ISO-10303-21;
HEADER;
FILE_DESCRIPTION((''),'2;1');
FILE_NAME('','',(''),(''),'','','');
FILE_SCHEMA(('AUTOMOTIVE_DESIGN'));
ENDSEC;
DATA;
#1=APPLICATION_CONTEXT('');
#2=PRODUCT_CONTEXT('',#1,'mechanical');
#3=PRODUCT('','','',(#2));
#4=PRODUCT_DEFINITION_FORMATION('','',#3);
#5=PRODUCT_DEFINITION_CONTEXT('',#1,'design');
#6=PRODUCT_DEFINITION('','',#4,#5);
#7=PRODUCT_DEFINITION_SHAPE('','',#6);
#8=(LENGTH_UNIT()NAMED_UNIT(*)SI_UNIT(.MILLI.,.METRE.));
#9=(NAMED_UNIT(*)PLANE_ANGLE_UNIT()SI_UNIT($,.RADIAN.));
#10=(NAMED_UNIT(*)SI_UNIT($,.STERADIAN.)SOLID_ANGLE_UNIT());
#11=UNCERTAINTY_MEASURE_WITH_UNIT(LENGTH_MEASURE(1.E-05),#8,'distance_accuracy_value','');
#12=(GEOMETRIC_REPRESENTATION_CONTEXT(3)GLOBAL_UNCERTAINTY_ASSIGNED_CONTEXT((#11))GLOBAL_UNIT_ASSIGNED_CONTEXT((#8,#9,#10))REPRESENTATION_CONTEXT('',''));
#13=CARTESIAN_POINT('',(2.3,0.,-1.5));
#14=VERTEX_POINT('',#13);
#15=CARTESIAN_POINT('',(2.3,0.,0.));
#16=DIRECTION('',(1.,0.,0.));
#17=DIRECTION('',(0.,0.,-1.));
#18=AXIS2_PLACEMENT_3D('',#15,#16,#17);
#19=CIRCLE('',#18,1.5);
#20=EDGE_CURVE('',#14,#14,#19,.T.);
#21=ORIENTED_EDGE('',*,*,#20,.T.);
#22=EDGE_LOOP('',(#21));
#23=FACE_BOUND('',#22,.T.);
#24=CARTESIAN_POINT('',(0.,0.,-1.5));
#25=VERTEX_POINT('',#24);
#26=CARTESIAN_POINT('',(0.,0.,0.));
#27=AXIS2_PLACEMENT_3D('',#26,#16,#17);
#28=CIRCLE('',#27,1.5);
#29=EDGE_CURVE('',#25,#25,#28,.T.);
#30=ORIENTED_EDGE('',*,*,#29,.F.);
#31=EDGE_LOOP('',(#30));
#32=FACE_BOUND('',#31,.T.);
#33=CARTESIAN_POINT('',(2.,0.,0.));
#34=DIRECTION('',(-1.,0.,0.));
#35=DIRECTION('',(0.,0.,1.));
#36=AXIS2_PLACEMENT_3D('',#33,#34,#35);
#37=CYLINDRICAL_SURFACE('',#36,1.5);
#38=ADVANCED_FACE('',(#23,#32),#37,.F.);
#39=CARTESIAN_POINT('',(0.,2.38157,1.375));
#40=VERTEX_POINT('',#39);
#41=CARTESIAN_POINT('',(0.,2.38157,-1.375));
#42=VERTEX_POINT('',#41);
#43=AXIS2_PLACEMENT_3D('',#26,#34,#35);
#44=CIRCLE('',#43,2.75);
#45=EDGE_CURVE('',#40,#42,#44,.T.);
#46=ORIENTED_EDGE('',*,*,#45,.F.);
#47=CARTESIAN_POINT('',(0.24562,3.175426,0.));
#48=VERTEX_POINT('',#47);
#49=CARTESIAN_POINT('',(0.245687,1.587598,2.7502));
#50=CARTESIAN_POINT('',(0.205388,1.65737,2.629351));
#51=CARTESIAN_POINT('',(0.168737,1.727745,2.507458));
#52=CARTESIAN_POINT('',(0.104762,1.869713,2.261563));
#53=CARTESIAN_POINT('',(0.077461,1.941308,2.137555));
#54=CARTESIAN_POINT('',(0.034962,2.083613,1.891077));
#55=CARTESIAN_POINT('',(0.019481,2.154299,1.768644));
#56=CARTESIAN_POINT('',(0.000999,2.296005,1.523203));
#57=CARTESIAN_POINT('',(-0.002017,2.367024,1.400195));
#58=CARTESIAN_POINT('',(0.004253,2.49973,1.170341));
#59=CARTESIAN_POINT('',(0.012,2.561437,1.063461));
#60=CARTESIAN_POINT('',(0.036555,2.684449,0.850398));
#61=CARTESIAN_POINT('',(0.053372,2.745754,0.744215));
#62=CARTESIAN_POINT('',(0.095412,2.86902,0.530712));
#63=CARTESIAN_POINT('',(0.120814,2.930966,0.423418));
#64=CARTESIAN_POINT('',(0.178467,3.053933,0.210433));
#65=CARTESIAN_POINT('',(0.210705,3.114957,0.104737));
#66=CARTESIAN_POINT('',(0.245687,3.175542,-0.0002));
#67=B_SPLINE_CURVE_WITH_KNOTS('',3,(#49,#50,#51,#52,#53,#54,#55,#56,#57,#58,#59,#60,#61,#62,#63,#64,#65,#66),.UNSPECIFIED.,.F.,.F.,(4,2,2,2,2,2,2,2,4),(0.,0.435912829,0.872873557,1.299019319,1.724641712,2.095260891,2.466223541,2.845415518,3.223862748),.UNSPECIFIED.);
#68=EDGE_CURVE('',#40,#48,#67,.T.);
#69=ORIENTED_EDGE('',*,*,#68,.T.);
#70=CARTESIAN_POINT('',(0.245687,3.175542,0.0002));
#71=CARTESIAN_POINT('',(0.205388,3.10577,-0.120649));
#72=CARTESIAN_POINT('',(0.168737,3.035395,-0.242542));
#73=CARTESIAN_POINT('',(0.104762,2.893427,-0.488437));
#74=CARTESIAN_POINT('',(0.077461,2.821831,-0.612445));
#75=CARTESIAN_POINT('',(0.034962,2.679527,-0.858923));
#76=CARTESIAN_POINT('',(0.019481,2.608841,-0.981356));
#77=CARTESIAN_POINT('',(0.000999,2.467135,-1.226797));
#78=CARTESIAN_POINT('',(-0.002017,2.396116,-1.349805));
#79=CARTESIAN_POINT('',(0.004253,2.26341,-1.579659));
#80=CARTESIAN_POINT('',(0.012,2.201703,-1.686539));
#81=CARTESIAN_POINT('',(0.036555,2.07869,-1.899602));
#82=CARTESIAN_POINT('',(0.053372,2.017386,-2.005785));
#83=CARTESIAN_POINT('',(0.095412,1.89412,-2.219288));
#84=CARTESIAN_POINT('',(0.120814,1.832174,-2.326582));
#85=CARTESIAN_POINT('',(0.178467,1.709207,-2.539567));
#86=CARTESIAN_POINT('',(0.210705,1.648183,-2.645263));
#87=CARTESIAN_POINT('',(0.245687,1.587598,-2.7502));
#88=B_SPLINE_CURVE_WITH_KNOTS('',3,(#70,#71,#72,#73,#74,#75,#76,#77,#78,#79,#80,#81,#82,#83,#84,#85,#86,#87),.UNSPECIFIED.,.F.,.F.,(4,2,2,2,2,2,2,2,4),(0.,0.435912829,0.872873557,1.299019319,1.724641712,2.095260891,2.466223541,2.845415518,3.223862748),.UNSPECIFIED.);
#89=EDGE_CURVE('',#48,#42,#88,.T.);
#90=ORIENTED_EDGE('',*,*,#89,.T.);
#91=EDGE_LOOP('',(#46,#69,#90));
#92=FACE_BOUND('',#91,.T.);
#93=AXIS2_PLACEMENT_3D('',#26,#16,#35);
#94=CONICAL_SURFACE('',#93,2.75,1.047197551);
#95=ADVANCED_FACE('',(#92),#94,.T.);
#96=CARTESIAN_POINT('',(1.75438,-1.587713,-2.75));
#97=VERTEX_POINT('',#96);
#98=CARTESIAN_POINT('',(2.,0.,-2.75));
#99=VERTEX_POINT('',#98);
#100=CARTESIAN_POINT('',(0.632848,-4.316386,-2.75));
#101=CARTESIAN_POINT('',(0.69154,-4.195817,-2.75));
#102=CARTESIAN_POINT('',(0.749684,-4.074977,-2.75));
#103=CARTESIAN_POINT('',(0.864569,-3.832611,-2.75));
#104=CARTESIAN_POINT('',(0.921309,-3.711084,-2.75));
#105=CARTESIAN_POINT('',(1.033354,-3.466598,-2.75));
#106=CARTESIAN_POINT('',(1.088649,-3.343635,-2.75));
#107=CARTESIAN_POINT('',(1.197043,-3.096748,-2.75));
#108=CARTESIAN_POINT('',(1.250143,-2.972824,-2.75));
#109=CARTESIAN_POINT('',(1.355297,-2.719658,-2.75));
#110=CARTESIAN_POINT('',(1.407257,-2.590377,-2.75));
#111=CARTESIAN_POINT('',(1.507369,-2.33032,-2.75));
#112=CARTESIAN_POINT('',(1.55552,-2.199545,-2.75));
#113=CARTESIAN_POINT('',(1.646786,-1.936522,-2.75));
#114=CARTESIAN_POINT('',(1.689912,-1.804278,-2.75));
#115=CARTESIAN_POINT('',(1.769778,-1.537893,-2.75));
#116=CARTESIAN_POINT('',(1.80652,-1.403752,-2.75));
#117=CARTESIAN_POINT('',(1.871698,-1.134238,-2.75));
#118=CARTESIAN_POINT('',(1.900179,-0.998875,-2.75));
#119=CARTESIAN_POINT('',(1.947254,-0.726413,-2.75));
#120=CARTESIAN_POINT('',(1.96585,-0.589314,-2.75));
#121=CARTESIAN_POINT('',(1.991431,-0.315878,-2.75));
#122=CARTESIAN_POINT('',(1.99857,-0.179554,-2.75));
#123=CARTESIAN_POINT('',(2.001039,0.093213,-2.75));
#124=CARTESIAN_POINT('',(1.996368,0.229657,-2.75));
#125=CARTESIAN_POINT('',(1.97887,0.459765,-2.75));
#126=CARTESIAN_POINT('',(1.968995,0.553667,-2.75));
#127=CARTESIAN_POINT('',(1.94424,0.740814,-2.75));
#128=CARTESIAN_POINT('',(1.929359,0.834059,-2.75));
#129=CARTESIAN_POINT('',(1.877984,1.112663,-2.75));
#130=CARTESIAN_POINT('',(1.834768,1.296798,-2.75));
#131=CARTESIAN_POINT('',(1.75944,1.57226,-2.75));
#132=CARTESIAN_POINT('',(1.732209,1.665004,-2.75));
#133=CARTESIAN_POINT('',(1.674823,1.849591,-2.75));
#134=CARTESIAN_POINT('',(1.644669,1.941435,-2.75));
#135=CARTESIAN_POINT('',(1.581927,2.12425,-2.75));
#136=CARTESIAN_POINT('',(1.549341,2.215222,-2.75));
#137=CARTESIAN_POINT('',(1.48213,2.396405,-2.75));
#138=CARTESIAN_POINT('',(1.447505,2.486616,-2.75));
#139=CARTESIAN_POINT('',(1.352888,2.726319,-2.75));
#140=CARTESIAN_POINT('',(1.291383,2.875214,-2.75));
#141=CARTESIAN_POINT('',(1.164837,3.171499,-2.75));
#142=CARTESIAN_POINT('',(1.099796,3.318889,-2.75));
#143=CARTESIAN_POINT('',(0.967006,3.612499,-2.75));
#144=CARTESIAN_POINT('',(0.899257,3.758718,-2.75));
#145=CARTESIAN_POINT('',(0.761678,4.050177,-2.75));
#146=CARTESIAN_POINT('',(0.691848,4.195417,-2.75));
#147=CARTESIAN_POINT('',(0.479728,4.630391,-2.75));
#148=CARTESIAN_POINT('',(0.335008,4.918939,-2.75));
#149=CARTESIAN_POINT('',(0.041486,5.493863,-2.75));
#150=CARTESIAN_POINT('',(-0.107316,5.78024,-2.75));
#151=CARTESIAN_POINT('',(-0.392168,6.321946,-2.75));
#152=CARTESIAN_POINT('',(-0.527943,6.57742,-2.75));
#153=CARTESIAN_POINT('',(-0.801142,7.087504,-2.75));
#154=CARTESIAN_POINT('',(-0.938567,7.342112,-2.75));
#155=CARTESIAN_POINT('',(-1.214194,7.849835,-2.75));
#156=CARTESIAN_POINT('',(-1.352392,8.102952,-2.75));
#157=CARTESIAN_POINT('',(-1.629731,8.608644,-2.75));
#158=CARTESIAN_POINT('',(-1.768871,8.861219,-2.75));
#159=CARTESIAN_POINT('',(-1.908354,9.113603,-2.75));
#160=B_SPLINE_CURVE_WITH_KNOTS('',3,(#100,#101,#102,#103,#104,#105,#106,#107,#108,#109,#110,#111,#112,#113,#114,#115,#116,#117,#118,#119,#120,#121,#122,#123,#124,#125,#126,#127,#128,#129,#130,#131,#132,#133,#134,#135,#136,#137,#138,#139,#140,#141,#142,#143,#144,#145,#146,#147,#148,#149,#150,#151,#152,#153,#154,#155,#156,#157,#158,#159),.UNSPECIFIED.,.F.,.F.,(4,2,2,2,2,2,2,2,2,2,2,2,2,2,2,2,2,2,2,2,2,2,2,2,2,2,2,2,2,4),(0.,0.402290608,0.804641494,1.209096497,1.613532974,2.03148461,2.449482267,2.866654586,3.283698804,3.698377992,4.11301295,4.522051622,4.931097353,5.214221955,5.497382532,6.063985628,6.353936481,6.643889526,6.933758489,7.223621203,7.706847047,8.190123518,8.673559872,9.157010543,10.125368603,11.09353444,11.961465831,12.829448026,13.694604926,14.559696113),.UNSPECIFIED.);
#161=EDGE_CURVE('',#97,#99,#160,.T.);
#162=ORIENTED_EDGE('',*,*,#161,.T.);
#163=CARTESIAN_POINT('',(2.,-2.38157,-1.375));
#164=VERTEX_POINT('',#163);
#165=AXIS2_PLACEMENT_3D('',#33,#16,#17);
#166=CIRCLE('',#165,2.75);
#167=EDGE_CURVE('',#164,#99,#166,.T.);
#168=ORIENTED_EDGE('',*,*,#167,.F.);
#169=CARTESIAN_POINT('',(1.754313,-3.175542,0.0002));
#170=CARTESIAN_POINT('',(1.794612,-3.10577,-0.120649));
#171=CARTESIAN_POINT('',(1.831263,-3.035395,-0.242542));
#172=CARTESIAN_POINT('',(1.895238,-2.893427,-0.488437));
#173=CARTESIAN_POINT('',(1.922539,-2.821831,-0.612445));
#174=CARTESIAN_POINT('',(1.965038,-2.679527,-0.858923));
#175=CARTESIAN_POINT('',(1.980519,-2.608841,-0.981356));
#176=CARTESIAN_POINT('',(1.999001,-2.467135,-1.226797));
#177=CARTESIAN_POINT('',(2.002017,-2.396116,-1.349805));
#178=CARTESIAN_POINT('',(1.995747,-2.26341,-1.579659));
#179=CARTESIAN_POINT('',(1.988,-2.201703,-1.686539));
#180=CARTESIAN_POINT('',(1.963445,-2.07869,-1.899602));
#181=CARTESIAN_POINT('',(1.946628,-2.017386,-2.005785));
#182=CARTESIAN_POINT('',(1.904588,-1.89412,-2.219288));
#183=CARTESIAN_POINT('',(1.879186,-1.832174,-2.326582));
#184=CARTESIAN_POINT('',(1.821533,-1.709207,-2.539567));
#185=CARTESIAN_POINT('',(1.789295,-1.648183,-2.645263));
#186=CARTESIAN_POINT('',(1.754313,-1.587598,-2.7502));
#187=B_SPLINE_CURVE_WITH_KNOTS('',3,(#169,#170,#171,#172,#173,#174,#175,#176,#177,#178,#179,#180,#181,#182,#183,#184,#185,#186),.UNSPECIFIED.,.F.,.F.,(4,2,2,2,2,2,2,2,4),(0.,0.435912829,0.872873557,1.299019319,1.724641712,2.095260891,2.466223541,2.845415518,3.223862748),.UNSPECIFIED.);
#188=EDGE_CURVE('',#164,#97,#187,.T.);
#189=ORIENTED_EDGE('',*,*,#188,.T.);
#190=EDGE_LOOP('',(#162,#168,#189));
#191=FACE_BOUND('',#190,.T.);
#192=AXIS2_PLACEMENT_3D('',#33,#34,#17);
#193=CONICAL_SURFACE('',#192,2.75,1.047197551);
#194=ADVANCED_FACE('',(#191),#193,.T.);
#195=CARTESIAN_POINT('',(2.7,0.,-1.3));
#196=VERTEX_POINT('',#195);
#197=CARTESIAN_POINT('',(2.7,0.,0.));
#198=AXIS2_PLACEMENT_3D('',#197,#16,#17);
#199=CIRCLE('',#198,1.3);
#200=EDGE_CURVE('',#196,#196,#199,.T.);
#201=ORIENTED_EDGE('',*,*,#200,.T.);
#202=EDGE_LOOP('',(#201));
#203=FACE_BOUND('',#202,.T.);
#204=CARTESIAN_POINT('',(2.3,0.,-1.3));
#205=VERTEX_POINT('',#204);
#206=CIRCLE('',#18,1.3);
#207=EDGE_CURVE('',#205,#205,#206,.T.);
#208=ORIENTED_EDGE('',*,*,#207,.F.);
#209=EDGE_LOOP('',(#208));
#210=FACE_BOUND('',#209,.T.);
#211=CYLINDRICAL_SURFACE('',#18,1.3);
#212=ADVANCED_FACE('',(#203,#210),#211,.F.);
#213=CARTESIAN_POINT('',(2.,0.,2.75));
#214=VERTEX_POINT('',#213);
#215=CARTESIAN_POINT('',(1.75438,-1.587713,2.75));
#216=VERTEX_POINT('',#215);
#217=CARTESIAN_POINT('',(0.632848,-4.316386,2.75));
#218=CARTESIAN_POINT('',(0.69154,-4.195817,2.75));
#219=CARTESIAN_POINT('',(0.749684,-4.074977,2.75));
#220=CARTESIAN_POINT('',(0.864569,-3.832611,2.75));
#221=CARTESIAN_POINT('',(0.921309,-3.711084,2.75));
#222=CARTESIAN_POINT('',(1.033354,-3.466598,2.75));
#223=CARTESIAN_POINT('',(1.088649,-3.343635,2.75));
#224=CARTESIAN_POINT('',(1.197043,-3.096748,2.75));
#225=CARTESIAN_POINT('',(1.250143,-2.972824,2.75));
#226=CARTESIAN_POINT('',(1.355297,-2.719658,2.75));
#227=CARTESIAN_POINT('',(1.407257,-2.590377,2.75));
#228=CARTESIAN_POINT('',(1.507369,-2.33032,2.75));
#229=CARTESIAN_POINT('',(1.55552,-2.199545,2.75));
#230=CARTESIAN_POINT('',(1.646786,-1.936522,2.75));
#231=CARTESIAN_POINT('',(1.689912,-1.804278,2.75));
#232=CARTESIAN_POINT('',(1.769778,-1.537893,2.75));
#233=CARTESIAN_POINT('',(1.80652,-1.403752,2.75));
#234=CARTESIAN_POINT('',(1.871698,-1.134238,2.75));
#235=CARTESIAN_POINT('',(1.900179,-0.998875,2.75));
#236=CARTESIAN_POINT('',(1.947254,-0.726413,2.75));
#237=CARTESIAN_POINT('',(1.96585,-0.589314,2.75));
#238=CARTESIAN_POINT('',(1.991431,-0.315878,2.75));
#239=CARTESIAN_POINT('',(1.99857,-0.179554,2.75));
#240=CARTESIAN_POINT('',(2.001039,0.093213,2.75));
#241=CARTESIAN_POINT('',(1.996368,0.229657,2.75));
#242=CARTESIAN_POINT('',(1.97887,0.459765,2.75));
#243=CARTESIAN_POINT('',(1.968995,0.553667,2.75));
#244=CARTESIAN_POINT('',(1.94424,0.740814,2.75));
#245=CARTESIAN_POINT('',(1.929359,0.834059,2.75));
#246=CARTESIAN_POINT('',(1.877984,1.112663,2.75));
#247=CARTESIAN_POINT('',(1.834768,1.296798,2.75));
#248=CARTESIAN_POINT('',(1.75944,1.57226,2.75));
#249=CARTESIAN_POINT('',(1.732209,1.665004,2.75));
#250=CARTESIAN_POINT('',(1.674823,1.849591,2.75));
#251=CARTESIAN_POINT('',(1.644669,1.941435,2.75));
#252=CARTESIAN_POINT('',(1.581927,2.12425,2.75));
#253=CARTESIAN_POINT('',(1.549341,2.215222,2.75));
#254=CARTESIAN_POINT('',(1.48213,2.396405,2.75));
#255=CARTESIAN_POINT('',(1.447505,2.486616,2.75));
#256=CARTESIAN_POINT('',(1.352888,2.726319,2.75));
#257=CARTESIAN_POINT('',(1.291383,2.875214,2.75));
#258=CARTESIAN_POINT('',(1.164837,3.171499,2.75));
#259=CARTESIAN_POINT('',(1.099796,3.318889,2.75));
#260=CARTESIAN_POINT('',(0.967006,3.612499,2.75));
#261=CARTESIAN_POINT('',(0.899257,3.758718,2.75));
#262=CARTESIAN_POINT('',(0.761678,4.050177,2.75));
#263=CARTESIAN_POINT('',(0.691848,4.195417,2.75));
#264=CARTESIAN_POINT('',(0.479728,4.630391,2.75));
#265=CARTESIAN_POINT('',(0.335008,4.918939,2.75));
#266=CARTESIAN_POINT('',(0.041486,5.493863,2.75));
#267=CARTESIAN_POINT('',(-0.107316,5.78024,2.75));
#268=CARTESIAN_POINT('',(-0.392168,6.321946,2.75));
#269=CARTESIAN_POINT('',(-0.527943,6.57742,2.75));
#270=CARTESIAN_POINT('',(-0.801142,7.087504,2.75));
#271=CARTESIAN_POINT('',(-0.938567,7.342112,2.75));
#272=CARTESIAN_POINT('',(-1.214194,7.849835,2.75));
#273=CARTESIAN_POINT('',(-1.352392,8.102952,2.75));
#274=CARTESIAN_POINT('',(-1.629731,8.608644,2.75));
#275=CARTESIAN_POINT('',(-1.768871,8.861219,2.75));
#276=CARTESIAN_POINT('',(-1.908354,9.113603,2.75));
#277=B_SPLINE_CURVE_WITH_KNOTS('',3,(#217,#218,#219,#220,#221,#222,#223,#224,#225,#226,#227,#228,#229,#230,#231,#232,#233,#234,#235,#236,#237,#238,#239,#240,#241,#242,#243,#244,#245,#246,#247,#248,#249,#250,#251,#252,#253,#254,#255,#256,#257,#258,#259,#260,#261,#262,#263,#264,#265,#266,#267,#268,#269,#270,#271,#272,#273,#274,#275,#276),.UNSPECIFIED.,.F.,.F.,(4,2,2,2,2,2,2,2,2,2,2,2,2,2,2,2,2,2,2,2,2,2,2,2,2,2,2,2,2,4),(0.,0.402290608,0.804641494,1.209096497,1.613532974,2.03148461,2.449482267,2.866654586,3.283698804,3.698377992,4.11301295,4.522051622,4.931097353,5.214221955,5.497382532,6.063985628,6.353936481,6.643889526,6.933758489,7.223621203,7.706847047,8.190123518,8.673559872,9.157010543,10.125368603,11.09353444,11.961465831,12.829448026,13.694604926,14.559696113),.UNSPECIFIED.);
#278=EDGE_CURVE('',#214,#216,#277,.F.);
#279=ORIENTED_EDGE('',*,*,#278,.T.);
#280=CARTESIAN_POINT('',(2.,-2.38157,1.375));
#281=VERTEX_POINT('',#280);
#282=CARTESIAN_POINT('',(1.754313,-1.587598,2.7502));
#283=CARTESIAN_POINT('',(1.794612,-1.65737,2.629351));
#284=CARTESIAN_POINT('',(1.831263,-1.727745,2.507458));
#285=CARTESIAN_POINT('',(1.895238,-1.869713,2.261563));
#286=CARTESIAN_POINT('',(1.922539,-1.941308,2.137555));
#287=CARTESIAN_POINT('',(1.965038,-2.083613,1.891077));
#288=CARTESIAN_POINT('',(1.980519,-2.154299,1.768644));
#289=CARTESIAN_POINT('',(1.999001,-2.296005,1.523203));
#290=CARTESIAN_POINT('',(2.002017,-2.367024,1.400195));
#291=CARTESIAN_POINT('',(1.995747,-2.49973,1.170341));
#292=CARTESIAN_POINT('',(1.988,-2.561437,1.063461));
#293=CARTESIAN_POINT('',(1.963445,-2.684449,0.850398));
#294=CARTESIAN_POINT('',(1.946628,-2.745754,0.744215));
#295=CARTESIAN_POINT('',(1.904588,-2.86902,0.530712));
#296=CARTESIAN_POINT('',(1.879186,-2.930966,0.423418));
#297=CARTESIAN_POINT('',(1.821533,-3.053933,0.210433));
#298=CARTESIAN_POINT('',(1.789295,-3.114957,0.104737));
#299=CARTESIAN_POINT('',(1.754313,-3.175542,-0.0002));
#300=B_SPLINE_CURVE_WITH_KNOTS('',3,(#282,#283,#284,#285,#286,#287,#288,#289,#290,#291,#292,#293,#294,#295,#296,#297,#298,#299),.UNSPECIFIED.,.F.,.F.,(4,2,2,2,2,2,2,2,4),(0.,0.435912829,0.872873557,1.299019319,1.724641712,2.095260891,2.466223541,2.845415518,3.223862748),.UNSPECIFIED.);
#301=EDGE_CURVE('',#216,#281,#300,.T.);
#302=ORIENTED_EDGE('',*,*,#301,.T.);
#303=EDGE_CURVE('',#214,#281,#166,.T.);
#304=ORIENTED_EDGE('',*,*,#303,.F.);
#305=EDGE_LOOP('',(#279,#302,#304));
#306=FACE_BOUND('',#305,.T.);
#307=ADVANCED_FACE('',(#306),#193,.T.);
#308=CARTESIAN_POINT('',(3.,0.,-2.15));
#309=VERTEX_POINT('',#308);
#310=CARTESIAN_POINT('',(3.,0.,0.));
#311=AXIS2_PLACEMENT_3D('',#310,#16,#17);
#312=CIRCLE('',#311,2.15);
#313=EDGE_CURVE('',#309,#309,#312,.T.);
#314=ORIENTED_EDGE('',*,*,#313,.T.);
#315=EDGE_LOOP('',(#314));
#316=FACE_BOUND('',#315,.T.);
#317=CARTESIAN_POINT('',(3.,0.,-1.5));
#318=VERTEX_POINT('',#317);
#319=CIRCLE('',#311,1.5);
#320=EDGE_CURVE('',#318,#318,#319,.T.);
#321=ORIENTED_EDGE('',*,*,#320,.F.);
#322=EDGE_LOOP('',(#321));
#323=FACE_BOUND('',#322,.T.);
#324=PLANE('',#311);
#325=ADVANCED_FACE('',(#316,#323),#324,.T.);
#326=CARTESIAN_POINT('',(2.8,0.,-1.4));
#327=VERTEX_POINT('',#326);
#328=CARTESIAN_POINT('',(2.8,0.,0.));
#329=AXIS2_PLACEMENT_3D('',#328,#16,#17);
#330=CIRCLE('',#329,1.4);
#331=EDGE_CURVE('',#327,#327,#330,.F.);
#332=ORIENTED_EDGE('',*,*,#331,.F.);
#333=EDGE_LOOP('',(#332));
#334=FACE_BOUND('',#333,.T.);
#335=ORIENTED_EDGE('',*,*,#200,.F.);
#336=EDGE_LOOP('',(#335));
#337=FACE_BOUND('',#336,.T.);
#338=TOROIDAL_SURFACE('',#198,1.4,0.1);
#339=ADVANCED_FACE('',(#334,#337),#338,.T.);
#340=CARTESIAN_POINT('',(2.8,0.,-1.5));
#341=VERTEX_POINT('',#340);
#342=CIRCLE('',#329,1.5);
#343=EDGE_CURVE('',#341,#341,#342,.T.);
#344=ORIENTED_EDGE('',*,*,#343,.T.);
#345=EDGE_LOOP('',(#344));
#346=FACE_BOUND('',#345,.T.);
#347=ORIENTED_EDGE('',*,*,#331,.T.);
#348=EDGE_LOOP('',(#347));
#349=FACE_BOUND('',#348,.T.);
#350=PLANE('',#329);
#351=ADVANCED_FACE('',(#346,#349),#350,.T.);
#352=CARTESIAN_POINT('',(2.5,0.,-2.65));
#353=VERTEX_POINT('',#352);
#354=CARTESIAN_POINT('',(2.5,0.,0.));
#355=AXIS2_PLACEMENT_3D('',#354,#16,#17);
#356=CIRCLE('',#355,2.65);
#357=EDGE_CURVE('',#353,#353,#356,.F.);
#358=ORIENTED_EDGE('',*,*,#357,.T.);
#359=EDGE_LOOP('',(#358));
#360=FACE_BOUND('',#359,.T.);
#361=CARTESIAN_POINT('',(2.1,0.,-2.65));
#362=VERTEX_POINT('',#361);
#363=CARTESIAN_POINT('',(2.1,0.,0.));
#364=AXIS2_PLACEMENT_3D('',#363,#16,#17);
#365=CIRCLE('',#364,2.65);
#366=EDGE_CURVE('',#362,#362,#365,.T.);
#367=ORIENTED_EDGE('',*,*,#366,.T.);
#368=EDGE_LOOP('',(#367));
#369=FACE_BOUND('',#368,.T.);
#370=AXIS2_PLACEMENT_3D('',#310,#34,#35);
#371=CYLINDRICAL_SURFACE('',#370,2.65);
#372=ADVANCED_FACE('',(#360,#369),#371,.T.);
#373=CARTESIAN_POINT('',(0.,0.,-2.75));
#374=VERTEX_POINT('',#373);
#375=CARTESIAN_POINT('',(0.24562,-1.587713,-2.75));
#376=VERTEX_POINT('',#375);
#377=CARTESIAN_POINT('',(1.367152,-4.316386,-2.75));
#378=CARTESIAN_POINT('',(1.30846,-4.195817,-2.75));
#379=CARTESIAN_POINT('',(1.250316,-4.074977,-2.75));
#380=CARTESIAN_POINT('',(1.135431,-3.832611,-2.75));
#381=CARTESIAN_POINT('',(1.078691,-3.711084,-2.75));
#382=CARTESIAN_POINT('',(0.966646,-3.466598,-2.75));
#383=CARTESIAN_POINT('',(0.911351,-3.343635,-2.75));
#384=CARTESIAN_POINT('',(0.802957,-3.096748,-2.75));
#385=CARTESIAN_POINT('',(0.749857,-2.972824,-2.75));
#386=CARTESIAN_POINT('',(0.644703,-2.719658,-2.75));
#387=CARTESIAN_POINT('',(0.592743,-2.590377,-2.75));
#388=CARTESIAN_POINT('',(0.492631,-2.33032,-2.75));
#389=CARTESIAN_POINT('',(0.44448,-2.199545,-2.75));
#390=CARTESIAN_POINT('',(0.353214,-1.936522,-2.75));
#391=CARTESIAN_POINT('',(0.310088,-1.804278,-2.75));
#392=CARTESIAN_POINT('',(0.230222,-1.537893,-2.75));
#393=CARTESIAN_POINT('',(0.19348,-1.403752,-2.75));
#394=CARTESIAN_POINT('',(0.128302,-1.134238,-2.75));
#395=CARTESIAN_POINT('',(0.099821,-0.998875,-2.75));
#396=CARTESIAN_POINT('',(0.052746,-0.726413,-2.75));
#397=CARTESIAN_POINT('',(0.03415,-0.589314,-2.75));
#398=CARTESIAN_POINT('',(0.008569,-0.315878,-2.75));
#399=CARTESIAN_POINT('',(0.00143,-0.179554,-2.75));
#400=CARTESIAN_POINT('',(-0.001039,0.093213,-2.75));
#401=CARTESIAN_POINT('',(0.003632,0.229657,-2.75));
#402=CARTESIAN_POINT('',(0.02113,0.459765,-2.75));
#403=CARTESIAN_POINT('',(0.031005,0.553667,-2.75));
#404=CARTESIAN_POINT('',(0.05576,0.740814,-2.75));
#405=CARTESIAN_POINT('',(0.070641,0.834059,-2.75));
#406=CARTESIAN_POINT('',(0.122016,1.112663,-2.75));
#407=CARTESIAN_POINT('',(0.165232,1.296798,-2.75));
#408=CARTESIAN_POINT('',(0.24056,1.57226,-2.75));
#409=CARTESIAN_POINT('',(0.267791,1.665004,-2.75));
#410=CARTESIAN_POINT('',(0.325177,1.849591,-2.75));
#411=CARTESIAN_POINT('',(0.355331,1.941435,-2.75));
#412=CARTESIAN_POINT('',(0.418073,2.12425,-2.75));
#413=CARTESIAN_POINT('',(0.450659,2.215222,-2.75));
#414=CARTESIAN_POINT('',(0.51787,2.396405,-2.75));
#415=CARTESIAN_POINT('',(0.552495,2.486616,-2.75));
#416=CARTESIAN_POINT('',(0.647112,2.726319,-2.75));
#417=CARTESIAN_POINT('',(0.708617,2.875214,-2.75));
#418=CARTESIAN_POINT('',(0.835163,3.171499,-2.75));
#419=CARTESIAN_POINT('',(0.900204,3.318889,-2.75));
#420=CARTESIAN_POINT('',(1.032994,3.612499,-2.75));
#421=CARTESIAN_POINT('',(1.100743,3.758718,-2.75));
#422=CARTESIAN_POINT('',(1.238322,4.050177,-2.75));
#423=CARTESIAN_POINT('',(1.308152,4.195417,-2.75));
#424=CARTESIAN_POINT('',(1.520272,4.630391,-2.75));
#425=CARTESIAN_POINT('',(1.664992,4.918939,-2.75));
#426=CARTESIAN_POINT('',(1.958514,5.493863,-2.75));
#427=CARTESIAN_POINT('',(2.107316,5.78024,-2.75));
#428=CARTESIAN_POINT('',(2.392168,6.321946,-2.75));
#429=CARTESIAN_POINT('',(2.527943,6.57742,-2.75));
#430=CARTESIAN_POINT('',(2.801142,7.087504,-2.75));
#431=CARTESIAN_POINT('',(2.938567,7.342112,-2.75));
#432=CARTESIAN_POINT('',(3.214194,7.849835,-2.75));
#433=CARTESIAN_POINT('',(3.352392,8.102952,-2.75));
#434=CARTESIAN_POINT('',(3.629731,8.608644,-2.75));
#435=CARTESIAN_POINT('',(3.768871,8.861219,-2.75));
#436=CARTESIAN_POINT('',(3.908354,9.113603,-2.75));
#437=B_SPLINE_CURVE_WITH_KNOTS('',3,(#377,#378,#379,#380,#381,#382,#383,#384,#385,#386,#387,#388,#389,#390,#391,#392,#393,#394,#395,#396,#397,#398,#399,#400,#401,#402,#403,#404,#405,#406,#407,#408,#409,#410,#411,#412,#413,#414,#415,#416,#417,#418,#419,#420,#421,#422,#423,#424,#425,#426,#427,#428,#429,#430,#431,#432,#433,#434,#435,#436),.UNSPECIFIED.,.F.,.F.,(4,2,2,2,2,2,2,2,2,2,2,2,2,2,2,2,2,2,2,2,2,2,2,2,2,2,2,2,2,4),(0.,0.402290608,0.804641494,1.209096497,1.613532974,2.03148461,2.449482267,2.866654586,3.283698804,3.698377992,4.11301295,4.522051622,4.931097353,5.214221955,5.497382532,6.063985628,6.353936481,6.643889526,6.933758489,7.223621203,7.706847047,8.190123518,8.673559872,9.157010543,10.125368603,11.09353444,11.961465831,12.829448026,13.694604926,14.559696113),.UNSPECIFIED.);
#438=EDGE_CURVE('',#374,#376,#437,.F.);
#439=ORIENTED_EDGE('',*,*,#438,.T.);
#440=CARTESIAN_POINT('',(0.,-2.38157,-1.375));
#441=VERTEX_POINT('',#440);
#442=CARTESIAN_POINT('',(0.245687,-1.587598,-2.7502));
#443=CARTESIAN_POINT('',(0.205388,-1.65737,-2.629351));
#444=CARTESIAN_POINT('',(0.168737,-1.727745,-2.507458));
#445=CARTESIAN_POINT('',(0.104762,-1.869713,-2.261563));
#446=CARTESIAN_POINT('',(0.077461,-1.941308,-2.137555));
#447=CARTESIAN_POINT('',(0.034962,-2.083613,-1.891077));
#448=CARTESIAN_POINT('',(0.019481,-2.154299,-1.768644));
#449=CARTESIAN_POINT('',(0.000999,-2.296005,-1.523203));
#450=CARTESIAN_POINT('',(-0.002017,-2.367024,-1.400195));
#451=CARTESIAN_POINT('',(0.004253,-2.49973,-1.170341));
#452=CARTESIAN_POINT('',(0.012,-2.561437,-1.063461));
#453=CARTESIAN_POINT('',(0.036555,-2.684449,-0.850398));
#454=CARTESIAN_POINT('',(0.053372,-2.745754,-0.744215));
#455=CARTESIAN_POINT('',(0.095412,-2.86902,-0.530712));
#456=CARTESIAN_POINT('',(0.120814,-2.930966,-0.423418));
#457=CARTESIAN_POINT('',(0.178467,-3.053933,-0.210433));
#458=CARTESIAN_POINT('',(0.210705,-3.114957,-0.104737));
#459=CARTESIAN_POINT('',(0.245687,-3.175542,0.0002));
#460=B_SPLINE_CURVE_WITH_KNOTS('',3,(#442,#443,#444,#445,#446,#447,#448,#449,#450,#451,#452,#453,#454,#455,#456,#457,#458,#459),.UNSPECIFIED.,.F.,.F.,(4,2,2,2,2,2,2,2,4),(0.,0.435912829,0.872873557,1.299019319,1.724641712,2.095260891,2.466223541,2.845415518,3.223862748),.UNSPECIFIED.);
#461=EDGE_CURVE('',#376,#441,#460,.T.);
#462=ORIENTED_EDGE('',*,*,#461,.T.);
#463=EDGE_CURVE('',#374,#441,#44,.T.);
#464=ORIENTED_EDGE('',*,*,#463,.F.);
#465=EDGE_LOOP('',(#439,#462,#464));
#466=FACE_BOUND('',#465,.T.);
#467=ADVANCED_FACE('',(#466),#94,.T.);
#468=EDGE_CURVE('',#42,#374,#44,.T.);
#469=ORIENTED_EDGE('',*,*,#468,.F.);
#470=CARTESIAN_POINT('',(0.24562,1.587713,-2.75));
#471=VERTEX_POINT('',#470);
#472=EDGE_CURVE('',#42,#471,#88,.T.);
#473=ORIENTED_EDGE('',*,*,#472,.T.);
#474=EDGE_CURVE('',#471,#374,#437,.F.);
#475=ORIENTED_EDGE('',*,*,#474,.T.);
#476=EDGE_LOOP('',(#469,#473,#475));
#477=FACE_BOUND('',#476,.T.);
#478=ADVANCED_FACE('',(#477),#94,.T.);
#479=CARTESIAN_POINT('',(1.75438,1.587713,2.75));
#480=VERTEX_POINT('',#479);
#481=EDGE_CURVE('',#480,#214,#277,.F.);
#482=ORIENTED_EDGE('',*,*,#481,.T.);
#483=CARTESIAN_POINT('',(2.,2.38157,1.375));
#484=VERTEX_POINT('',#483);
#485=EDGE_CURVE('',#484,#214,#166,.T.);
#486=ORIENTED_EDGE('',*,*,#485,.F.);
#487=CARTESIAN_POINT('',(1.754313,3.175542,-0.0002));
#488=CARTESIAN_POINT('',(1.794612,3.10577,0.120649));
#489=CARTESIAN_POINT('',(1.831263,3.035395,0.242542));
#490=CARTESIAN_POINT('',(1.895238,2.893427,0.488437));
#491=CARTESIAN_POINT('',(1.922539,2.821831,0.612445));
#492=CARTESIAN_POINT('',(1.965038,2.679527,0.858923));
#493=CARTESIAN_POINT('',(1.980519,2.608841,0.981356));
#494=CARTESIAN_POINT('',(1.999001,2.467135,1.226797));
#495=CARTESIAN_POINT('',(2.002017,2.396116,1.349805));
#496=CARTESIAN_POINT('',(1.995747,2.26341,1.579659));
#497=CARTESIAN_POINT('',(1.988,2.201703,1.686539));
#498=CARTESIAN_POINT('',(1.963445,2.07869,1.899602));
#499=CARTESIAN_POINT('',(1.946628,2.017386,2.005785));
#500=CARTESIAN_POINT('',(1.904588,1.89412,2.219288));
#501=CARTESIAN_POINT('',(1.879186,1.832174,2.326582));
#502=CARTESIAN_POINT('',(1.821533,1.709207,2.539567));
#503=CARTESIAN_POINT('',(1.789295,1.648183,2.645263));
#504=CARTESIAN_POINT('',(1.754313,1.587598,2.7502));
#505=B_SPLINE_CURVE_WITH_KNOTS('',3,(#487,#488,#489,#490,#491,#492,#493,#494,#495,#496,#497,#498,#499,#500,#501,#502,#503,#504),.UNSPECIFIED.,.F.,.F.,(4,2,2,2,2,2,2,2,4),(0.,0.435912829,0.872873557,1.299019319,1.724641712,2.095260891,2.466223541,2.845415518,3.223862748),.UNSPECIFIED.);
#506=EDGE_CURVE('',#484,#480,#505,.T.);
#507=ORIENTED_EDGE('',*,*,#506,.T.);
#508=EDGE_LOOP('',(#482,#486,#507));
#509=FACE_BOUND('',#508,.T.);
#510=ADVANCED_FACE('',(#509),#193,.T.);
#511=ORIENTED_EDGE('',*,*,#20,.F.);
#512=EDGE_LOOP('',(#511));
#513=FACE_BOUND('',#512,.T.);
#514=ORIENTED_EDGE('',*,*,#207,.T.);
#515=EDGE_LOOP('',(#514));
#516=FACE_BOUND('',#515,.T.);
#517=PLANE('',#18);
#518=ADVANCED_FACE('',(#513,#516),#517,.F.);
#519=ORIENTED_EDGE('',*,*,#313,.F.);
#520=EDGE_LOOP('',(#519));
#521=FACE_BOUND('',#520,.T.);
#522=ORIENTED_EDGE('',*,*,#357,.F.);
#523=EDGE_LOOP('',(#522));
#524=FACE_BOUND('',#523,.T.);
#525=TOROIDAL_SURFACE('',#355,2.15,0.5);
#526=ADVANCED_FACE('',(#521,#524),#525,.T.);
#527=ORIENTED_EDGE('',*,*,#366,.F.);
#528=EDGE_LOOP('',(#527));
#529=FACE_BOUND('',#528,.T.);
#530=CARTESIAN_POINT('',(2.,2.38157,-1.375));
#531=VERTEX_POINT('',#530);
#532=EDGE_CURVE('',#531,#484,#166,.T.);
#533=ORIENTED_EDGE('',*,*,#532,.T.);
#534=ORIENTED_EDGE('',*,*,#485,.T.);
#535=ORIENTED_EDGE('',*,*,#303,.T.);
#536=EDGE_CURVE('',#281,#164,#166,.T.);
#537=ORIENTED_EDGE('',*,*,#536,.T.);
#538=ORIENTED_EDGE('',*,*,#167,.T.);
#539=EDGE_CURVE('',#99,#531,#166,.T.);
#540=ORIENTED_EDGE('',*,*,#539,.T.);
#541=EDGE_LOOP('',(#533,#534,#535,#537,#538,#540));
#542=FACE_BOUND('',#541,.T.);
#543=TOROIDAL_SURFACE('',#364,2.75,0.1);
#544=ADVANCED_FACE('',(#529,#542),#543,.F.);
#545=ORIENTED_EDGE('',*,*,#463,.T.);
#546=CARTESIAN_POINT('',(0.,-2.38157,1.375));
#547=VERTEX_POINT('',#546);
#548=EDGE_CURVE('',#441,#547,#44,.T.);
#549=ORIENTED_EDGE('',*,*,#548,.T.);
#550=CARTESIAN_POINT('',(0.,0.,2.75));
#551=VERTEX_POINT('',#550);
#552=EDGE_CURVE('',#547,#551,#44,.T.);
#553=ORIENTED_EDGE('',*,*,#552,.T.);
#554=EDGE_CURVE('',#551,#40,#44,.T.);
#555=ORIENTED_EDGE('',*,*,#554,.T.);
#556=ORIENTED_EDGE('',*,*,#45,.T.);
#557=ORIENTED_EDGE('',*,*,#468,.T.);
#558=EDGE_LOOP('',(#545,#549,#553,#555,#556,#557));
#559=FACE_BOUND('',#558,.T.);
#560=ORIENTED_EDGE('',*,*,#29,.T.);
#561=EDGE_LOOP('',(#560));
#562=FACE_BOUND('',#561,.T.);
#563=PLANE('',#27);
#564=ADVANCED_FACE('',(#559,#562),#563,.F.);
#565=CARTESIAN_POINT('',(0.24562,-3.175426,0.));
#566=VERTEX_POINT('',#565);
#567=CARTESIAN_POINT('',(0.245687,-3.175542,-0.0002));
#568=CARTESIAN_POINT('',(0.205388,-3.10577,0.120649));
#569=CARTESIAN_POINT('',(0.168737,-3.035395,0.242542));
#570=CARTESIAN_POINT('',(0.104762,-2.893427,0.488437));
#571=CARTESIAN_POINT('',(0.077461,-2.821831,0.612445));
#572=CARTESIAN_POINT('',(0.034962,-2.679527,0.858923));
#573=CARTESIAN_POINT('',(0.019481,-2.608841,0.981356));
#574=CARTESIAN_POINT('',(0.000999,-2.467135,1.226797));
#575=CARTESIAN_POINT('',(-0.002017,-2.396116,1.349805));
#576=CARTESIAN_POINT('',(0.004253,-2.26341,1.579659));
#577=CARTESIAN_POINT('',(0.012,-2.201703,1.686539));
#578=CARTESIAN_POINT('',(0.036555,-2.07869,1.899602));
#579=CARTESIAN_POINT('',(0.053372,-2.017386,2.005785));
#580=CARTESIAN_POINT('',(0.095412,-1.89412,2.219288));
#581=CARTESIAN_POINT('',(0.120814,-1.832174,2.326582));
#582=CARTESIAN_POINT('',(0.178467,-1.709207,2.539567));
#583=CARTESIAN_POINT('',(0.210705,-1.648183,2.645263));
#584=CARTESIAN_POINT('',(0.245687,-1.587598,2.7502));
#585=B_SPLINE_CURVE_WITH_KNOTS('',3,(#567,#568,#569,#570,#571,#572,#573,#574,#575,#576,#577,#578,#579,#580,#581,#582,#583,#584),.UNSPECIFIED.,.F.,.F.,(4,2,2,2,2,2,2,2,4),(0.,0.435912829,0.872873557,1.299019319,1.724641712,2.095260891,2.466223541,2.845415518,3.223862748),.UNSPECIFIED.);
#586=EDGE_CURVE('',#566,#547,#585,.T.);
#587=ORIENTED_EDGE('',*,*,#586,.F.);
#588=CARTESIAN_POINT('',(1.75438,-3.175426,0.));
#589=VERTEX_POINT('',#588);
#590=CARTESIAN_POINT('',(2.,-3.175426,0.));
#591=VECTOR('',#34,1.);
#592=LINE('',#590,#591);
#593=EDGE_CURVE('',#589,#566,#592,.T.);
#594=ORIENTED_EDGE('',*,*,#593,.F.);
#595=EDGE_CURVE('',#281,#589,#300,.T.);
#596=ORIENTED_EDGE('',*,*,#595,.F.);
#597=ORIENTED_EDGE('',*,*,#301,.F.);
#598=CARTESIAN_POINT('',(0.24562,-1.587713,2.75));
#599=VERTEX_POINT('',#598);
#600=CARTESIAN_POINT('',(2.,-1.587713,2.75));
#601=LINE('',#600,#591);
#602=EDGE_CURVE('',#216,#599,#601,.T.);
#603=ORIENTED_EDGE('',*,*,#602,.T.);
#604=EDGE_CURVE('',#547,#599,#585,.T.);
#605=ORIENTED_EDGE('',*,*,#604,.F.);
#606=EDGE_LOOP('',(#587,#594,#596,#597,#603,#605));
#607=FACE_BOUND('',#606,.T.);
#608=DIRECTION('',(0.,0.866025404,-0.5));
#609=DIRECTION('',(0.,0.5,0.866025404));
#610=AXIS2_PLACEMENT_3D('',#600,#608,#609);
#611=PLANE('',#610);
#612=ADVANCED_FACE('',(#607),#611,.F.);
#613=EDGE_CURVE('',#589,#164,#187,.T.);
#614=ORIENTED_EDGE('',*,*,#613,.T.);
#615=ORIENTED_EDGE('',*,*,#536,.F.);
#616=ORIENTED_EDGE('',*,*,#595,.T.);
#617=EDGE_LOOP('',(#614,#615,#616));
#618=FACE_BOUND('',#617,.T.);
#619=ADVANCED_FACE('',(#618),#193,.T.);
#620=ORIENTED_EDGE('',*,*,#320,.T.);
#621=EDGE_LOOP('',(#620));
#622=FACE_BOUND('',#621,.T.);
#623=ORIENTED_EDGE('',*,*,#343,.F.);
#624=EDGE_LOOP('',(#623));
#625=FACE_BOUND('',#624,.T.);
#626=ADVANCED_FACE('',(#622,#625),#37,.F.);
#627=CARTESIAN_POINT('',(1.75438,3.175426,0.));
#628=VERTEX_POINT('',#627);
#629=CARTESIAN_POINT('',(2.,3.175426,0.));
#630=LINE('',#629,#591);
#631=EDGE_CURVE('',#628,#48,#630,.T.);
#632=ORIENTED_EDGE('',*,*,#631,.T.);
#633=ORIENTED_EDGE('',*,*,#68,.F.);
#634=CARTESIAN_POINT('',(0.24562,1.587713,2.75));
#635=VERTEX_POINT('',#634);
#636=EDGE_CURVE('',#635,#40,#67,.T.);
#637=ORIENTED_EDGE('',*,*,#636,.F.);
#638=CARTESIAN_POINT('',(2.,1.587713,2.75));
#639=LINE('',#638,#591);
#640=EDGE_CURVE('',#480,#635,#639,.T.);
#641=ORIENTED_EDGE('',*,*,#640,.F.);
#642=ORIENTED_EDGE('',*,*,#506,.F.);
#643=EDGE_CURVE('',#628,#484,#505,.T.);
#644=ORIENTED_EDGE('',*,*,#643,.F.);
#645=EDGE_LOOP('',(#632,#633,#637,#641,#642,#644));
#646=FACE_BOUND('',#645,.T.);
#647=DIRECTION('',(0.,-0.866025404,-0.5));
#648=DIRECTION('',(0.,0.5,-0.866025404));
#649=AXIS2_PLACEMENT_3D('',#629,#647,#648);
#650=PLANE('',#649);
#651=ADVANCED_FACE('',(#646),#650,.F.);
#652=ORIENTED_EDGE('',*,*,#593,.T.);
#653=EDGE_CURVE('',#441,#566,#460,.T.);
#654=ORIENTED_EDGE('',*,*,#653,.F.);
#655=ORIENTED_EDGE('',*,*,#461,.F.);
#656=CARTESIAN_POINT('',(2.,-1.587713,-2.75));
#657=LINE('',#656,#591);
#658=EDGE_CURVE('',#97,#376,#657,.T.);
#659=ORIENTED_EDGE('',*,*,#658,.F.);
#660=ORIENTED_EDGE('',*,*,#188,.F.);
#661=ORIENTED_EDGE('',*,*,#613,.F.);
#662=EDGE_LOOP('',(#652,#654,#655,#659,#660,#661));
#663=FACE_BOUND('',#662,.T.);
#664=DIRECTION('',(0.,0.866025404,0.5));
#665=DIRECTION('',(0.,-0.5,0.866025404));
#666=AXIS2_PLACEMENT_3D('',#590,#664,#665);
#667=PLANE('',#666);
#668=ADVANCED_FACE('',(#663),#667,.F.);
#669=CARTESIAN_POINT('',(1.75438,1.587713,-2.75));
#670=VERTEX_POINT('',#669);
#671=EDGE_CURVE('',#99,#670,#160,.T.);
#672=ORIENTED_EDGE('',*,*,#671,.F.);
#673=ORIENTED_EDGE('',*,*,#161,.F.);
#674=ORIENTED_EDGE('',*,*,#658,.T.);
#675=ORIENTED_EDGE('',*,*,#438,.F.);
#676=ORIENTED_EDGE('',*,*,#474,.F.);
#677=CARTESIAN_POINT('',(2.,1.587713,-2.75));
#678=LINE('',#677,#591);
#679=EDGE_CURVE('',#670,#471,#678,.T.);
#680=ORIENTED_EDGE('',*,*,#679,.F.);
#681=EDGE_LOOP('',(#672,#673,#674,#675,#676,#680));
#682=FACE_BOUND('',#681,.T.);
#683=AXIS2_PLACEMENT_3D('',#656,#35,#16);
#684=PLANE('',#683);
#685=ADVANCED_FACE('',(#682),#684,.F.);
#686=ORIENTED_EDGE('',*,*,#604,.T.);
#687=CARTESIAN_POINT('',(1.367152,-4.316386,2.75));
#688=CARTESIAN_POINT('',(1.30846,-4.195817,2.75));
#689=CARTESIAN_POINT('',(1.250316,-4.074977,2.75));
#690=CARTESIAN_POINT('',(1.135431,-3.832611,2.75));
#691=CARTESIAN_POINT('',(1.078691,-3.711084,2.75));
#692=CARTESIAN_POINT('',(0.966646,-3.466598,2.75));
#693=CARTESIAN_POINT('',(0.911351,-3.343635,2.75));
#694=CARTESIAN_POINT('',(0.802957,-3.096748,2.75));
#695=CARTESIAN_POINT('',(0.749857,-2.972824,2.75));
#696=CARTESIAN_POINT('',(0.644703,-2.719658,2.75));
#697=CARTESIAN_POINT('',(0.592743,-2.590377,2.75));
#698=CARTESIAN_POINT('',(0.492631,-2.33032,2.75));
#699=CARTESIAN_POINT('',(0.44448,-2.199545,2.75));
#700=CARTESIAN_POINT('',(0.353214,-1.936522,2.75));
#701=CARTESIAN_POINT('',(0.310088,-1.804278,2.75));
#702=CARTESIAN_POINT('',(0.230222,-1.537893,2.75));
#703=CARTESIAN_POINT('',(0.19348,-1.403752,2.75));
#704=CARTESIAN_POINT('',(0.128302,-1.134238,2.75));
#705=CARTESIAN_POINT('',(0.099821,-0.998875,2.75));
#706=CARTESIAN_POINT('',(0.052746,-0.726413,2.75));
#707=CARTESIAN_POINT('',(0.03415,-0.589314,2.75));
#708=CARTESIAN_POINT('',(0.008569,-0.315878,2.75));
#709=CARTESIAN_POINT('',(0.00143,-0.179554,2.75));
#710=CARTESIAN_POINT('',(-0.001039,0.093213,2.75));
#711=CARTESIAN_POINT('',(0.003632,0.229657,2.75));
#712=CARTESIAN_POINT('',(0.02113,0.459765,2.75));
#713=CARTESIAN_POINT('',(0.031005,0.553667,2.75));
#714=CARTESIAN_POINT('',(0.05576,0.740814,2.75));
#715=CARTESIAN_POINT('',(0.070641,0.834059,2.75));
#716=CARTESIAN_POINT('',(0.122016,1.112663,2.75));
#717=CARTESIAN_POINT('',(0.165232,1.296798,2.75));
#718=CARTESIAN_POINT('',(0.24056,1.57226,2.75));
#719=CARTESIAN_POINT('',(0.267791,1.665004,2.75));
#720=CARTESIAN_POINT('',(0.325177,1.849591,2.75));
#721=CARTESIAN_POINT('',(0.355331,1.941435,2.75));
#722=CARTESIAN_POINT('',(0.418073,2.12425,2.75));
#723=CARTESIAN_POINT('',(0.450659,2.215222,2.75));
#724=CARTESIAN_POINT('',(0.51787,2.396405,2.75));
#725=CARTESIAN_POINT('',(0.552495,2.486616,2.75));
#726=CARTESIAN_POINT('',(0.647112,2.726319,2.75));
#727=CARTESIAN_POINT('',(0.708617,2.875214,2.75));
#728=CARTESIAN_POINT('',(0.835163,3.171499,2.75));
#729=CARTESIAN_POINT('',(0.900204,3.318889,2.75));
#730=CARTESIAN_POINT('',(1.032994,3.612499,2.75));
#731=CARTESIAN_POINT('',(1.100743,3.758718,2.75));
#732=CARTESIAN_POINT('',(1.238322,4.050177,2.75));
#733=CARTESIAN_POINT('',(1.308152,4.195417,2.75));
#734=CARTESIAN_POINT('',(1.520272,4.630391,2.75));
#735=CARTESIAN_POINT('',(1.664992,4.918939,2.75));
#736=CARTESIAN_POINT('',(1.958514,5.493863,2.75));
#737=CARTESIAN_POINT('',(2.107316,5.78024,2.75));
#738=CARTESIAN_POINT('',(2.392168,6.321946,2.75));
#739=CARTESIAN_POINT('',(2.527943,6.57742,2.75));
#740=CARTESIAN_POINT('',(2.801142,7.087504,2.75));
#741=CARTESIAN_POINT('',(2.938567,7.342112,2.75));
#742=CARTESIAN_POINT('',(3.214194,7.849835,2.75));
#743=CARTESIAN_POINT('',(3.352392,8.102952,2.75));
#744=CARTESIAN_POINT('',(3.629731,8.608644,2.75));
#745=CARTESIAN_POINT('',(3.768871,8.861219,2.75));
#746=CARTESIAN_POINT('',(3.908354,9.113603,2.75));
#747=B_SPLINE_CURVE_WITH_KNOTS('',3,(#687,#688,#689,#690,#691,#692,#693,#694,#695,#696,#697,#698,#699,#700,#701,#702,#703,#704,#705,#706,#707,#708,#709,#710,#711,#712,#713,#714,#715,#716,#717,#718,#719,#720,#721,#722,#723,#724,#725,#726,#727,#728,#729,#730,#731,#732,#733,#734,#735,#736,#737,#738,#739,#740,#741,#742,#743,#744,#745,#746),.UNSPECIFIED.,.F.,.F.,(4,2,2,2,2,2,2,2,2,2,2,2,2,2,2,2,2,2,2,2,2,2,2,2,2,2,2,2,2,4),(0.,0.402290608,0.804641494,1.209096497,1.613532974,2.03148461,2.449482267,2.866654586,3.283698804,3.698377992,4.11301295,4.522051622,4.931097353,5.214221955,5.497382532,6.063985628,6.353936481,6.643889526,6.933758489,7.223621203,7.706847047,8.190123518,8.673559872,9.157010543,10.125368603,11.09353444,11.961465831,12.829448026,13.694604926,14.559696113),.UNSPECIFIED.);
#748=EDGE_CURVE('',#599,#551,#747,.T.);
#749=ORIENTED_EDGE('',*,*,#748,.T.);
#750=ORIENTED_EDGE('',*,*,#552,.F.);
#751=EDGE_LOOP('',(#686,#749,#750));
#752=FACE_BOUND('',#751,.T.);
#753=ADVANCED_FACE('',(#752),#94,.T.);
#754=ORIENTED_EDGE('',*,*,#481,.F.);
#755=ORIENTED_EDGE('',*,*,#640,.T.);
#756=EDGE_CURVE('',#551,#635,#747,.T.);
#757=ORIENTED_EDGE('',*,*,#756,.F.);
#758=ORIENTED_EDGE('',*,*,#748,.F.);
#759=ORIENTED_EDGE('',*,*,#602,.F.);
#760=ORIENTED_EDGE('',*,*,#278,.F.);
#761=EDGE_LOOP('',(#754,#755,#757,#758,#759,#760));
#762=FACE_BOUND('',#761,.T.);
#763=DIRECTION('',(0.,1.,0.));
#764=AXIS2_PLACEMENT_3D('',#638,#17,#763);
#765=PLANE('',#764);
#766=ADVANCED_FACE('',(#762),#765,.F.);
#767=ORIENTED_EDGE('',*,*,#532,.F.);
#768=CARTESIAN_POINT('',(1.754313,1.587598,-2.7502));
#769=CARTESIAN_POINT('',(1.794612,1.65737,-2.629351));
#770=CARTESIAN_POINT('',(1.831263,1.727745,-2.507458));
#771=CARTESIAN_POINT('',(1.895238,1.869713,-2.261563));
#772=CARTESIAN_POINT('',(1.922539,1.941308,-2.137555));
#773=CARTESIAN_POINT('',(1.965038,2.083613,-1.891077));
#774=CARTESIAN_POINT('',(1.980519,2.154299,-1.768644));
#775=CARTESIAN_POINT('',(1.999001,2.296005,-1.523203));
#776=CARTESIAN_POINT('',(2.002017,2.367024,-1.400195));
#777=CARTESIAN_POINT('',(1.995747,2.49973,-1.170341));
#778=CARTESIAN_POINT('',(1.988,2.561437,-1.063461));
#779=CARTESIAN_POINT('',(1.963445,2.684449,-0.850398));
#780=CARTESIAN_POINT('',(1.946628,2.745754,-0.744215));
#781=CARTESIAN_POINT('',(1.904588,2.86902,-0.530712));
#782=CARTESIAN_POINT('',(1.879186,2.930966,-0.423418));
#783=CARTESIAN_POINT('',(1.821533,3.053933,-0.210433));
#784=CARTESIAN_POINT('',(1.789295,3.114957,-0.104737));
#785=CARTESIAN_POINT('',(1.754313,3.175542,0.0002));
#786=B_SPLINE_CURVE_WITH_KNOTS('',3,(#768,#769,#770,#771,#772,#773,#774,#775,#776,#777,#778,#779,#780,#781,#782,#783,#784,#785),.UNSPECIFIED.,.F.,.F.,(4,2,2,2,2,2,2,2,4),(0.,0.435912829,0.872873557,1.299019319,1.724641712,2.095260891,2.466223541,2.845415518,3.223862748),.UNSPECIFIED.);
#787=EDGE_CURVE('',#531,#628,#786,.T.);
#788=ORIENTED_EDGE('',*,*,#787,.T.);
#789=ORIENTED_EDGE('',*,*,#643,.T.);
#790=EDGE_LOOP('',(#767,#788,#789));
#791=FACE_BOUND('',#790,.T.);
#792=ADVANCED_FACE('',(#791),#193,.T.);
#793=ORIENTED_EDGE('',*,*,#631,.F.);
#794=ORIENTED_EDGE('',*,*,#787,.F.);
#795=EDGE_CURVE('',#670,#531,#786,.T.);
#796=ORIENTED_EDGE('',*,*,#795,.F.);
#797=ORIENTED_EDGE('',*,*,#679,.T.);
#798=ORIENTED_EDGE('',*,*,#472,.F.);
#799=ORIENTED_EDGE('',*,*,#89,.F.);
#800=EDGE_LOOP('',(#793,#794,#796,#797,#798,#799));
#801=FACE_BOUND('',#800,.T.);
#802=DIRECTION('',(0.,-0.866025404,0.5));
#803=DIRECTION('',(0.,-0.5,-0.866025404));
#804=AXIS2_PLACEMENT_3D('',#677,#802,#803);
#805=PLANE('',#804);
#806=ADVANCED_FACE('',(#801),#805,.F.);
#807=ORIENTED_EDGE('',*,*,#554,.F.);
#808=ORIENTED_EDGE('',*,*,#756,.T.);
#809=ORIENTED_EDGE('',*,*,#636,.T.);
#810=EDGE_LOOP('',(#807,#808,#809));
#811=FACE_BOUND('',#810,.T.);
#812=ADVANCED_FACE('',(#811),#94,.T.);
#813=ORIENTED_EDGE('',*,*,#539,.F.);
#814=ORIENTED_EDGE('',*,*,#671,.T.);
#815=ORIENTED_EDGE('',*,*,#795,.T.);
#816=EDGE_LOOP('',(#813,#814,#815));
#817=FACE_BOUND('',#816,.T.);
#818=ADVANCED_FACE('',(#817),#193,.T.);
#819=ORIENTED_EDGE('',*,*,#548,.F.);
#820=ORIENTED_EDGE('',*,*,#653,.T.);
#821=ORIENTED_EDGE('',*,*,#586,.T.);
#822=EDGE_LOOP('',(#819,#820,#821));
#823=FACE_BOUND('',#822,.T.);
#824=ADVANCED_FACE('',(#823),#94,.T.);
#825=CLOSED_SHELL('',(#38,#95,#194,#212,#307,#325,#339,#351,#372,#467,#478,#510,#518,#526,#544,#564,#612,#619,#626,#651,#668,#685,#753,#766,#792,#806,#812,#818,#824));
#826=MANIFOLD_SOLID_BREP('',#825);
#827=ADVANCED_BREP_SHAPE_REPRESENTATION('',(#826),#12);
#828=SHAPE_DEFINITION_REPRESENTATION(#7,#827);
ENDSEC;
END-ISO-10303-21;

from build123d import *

# Parameters (mm, degrees)
SKETCH_1_R          = 1.5
EXTRUDE_1_DEPTH     = 2
SKETCH_2_OUTSIDE_W  = 16.156
SKETCH_2_OUTSIDE_H  = 17.006
SKETCH_2_OUTSIDE_R  = 2.75
CUT_EXTRUDE_1_DEPTH = 2
CUT_EXTRUDE_1_DRAFT = -60
SKETCH_3_OUTSIDE_W  = 16.156
SKETCH_3_OUTSIDE_H  = 17.006
SKETCH_3_OUTSIDE_R  = 2.75
CUT_EXTRUDE_2_DEPTH = 2
CUT_EXTRUDE_2_DRAFT = -60
SKETCH_4_R          = 2.65
SKETCH_4_R_2        = 1.5
EXTRUDE_2_DEPTH     = 1
FILLET_1_R          = 0.1
FILLET_2_R          = 0.5
EXTRUDE_START       = -0.2
SKETCH_5_R          = 1.7
SKETCH_5_R_2        = 1.3
EXTRUDE_3_DEPTH     = 0.5
FILLET_3_R          = 0.1


with BuildPart() as part:
    # 草图1 → 凸台-拉伸1 (new body)
    with BuildSketch(Plane(origin=(0, 0, 0), x_dir=(0, 0, -1), z_dir=(1, 0, 0))):
        Polygon((0, 3.175426481), (-2.75, 1.58771324), (-2.75, -1.58771324), (0, -3.175426481), (2.75, -1.58771324), (2.75, 1.58771324), align=None)
        Circle(SKETCH_1_R, mode=Mode.SUBTRACT)
    extrude(amount=EXTRUDE_1_DEPTH)


with BuildPart() as cut_extrude_1_tool:
    # 草图2 outside → 切除-拉伸1 (with draft: the straight prism first)
    with BuildSketch(Plane.ZY):
        Rectangle(SKETCH_2_OUTSIDE_W, SKETCH_2_OUTSIDE_H)
        Circle(SKETCH_2_OUTSIDE_R, mode=Mode.SUBTRACT)
    extrude(amount=-CUT_EXTRUDE_1_DEPTH)
    # 切除-拉伸1: the draft: its side faces are tilted about the plane it starts from
    cut_extrude_1_sides = [cut_extrude_1_tool.faces().sort_by_distance(p)[0] for p in [
        (1, -8.503, 0),
        (1, 0, 8.078),
        (1, 8.503, 0),
        (1, 0, -8.078),
        (1, 0, -2.75),
    ]]
    draft(cut_extrude_1_sides, Plane.ZY, CUT_EXTRUDE_1_DRAFT)


with BuildPart() as part_1:
    add(part.part)

    # 切除-拉伸1: cut by cut_extrude_1_tool
    add(cut_extrude_1_tool.part, mode=Mode.SUBTRACT)


with BuildPart() as cut_extrude_2_tool:
    # 草图3 outside → 切除-拉伸2 (with draft: the straight prism first)
    with BuildSketch(Plane(origin=(2, 0, 0), x_dir=(0, 0, -1), z_dir=(1, 0, 0))):
        Rectangle(SKETCH_3_OUTSIDE_W, SKETCH_3_OUTSIDE_H)
        Circle(SKETCH_3_OUTSIDE_R, mode=Mode.SUBTRACT)
    extrude(amount=-CUT_EXTRUDE_2_DEPTH)
    # 切除-拉伸2: the draft: its side faces are tilted about the plane it starts from
    cut_extrude_2_sides = [cut_extrude_2_tool.faces().sort_by_distance(p)[0] for p in [
        (1, -8.503, 0),
        (1, 0, -8.078),
        (1, 8.503, 0),
        (1, 0, 8.078),
        (1, 0, 2.75),
    ]]
    draft(cut_extrude_2_sides, Plane(origin=(2, 0, 0), x_dir=(0, 0, -1), z_dir=(1, 0, 0)), CUT_EXTRUDE_2_DRAFT)


with BuildPart() as part_2:
    add(part_1.part)

    # 切除-拉伸2: cut by cut_extrude_2_tool
    add(cut_extrude_2_tool.part, mode=Mode.SUBTRACT)

    # 草图4 → 凸台-拉伸2 (add)
    with BuildSketch(Plane(origin=(2, 0, 0), x_dir=(0, 0, -1), z_dir=(1, 0, 0))):
        Circle(SKETCH_4_R)
        Circle(SKETCH_4_R_2, mode=Mode.SUBTRACT)
    extrude(amount=EXTRUDE_2_DEPTH)

    # 圆角1
    fillet_1_edges = [part_2.edges().sort_by_distance(p)[0] for p in [
        (2, 0, 2.65),
    ]]
    fillet(fillet_1_edges, radius=FILLET_1_R - 0.0001)  # a hair under: the kernel refuses the full size

    # 圆角2
    fillet_2_edges = [part_2.edges().sort_by_distance(p)[0] for p in [
        (3, 0, 2.65),
    ]]
    fillet(fillet_2_edges, radius=FILLET_2_R)

    # 草图5 → 凸台-拉伸3 (add)
    with BuildSketch(Plane(origin=(3, 0, 0), x_dir=(0, 0, -1), z_dir=(1, 0, 0)).offset(EXTRUDE_START)):
        Circle(SKETCH_5_R)
        Circle(SKETCH_5_R_2, mode=Mode.SUBTRACT)
    extrude(amount=-EXTRUDE_3_DEPTH)

    # 圆角3
    fillet_3_edges = [part_2.edges().sort_by_distance(p)[0] for p in [
        (2.8, 0, 1.3),
    ]]
    fillet(fillet_3_edges, radius=FILLET_3_R)


solid = part_2.part
